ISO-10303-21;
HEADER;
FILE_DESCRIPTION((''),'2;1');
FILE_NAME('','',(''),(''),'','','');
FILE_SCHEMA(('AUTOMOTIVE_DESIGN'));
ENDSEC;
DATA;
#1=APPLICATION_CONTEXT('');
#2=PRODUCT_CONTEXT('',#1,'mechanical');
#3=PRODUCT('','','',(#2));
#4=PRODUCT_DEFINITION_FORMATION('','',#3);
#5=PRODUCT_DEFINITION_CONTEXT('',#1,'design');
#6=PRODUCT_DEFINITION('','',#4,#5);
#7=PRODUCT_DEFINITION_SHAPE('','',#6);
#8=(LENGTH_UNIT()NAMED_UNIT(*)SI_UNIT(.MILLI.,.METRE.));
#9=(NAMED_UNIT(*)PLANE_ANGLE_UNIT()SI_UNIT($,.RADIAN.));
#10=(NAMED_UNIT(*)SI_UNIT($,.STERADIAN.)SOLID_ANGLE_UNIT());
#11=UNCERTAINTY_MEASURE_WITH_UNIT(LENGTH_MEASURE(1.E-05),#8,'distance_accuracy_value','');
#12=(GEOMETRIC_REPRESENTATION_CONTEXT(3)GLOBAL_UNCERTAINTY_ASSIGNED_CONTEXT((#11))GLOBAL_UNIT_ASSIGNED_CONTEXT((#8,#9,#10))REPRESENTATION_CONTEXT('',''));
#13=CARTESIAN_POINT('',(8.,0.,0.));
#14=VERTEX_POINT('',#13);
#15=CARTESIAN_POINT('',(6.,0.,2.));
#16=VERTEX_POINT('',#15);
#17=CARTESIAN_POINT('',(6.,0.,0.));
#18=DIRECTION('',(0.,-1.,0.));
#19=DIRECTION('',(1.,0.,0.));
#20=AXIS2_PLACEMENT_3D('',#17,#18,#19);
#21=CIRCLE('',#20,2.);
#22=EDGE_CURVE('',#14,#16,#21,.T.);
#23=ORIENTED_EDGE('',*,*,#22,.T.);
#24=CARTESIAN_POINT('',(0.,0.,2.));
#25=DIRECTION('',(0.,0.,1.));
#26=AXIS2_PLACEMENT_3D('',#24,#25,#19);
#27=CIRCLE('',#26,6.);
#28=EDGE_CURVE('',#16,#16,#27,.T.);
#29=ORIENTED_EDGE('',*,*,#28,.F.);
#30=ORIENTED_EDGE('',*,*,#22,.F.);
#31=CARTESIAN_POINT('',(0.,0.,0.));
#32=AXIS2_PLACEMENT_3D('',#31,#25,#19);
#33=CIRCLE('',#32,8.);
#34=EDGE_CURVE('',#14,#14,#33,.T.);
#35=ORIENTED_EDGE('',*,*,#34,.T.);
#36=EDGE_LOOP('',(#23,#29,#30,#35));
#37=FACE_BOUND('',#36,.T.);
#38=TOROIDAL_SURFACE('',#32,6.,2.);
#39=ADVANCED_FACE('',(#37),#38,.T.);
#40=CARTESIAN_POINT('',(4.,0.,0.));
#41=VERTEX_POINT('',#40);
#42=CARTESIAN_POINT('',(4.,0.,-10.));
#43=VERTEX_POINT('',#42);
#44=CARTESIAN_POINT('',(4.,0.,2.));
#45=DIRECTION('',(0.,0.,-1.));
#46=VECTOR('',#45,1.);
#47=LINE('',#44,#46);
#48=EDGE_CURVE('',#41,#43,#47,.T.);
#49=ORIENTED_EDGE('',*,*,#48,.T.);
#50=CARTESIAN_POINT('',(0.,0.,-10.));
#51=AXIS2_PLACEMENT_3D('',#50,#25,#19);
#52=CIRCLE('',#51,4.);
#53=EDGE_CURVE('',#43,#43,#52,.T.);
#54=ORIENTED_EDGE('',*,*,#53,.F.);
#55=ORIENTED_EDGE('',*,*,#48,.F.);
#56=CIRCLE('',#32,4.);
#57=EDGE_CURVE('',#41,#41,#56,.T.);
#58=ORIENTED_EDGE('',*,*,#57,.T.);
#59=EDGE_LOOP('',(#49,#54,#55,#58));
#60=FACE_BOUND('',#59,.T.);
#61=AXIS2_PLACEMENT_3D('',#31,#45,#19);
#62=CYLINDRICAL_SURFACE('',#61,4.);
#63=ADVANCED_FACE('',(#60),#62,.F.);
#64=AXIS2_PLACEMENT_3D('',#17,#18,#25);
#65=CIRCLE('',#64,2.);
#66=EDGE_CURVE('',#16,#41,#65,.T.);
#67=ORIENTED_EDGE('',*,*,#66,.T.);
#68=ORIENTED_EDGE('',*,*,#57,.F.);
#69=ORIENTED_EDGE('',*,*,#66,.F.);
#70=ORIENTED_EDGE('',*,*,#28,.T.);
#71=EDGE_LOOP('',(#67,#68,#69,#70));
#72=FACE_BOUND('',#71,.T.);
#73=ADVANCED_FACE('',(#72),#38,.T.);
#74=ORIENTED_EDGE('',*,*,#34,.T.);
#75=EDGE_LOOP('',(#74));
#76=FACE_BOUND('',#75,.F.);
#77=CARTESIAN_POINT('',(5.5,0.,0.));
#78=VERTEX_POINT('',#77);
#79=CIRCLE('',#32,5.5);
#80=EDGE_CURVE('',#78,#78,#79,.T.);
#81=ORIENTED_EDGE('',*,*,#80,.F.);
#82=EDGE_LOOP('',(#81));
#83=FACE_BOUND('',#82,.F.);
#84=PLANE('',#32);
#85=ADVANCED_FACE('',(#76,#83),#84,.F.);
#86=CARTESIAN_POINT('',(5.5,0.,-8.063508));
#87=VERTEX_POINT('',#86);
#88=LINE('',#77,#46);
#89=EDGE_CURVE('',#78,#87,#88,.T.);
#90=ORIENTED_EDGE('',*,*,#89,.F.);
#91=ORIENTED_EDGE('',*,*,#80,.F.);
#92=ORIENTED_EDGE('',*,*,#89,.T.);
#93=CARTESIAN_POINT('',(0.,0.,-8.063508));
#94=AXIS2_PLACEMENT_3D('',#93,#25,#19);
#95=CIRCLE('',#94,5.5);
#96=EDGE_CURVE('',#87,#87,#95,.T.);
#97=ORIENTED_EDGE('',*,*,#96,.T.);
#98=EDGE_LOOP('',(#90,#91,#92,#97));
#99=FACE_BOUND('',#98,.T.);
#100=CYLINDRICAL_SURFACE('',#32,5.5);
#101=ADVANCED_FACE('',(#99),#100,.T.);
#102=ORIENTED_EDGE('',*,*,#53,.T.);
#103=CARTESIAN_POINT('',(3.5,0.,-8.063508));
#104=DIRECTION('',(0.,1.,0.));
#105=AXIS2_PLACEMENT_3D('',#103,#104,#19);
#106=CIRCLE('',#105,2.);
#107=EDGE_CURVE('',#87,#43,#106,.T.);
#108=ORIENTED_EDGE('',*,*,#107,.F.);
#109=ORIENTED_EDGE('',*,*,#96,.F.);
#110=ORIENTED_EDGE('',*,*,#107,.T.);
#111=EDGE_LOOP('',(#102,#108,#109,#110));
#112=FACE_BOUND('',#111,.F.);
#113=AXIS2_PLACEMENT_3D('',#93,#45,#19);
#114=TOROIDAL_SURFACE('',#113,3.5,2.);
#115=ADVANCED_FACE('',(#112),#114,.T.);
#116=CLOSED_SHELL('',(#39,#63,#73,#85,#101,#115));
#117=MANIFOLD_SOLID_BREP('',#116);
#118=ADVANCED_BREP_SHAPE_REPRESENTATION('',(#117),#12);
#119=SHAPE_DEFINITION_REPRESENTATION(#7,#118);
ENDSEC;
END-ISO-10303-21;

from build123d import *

# Parameters (mm, degrees)
F0_R     = 5.5
F0_R_2   = 4
F1_DEPTH = 10
F0_R_3   = 8
F2_DEPTH = 2


# Not quite as in the source:
# - a fillet or chamfer that OpenCascade refuses, or shapes differently, is made with other operations: its cross-section is extruded or revolved along the edge and cut away or added


with BuildPart() as f1:
    # F0 (on Top) → F1 (new body)
    with BuildSketch(Plane.XY):
        Circle(F0_R)
        Circle(F0_R_2, mode=Mode.SUBTRACT)
    extrude(amount=-F1_DEPTH)

    # F0 (on Top) → F2 (join)
    with BuildSketch(Plane.XY):
        Circle(F0_R_3)
        Circle(F0_R, mode=Mode.SUBTRACT)
        Circle(F0_R)
        Circle(F0_R_2, mode=Mode.SUBTRACT)
    extrude(amount=F2_DEPTH)

    # F3: fillet of radius 2 on 3 edges, made by hand

    # F3_s1 → F3_t2 (revolve, cut)
    with BuildSketch(Plane.XZ):
        with BuildLine():
            ThreePointArc((8, 0), (7.4142135624, 1.4142135624), (6, 2))
            Line((6, 2), (8, 2))
            Line((8, 2), (8, 0))
        make_face()
    revolve(axis=Axis((0, 0, 2), (0, 0, 1)), mode=Mode.SUBTRACT)

    # F3_s3 → F3_t4 (revolve, cut)
    with BuildSketch(Plane.XZ):
        with BuildLine():
            ThreePointArc((6, 2), (4.5857864376, 1.4142135624), (4, 0))
            Line((4, 0), (4, 2))
            Line((4, 2), (6, 2))
        make_face()
    revolve(axis=Axis((0, 0, 2), (0, 0, 1)), mode=Mode.SUBTRACT)

    # F3_s5 → F3_t6 (revolve, cut)
    with BuildSketch(Plane.XZ):
        with BuildLine():
            ThreePointArc((5.5, -8.0635083269), (5.0811388301, -9.2882531983), (4, -10))
            Line((4, -10), (5.5, -10))
            Line((5.5, -10), (5.5, -8.0635083269))
        make_face()
    revolve(axis=Axis((0, 0, -10), (0, 0, 1)), mode=Mode.SUBTRACT)


solid = f1.part
